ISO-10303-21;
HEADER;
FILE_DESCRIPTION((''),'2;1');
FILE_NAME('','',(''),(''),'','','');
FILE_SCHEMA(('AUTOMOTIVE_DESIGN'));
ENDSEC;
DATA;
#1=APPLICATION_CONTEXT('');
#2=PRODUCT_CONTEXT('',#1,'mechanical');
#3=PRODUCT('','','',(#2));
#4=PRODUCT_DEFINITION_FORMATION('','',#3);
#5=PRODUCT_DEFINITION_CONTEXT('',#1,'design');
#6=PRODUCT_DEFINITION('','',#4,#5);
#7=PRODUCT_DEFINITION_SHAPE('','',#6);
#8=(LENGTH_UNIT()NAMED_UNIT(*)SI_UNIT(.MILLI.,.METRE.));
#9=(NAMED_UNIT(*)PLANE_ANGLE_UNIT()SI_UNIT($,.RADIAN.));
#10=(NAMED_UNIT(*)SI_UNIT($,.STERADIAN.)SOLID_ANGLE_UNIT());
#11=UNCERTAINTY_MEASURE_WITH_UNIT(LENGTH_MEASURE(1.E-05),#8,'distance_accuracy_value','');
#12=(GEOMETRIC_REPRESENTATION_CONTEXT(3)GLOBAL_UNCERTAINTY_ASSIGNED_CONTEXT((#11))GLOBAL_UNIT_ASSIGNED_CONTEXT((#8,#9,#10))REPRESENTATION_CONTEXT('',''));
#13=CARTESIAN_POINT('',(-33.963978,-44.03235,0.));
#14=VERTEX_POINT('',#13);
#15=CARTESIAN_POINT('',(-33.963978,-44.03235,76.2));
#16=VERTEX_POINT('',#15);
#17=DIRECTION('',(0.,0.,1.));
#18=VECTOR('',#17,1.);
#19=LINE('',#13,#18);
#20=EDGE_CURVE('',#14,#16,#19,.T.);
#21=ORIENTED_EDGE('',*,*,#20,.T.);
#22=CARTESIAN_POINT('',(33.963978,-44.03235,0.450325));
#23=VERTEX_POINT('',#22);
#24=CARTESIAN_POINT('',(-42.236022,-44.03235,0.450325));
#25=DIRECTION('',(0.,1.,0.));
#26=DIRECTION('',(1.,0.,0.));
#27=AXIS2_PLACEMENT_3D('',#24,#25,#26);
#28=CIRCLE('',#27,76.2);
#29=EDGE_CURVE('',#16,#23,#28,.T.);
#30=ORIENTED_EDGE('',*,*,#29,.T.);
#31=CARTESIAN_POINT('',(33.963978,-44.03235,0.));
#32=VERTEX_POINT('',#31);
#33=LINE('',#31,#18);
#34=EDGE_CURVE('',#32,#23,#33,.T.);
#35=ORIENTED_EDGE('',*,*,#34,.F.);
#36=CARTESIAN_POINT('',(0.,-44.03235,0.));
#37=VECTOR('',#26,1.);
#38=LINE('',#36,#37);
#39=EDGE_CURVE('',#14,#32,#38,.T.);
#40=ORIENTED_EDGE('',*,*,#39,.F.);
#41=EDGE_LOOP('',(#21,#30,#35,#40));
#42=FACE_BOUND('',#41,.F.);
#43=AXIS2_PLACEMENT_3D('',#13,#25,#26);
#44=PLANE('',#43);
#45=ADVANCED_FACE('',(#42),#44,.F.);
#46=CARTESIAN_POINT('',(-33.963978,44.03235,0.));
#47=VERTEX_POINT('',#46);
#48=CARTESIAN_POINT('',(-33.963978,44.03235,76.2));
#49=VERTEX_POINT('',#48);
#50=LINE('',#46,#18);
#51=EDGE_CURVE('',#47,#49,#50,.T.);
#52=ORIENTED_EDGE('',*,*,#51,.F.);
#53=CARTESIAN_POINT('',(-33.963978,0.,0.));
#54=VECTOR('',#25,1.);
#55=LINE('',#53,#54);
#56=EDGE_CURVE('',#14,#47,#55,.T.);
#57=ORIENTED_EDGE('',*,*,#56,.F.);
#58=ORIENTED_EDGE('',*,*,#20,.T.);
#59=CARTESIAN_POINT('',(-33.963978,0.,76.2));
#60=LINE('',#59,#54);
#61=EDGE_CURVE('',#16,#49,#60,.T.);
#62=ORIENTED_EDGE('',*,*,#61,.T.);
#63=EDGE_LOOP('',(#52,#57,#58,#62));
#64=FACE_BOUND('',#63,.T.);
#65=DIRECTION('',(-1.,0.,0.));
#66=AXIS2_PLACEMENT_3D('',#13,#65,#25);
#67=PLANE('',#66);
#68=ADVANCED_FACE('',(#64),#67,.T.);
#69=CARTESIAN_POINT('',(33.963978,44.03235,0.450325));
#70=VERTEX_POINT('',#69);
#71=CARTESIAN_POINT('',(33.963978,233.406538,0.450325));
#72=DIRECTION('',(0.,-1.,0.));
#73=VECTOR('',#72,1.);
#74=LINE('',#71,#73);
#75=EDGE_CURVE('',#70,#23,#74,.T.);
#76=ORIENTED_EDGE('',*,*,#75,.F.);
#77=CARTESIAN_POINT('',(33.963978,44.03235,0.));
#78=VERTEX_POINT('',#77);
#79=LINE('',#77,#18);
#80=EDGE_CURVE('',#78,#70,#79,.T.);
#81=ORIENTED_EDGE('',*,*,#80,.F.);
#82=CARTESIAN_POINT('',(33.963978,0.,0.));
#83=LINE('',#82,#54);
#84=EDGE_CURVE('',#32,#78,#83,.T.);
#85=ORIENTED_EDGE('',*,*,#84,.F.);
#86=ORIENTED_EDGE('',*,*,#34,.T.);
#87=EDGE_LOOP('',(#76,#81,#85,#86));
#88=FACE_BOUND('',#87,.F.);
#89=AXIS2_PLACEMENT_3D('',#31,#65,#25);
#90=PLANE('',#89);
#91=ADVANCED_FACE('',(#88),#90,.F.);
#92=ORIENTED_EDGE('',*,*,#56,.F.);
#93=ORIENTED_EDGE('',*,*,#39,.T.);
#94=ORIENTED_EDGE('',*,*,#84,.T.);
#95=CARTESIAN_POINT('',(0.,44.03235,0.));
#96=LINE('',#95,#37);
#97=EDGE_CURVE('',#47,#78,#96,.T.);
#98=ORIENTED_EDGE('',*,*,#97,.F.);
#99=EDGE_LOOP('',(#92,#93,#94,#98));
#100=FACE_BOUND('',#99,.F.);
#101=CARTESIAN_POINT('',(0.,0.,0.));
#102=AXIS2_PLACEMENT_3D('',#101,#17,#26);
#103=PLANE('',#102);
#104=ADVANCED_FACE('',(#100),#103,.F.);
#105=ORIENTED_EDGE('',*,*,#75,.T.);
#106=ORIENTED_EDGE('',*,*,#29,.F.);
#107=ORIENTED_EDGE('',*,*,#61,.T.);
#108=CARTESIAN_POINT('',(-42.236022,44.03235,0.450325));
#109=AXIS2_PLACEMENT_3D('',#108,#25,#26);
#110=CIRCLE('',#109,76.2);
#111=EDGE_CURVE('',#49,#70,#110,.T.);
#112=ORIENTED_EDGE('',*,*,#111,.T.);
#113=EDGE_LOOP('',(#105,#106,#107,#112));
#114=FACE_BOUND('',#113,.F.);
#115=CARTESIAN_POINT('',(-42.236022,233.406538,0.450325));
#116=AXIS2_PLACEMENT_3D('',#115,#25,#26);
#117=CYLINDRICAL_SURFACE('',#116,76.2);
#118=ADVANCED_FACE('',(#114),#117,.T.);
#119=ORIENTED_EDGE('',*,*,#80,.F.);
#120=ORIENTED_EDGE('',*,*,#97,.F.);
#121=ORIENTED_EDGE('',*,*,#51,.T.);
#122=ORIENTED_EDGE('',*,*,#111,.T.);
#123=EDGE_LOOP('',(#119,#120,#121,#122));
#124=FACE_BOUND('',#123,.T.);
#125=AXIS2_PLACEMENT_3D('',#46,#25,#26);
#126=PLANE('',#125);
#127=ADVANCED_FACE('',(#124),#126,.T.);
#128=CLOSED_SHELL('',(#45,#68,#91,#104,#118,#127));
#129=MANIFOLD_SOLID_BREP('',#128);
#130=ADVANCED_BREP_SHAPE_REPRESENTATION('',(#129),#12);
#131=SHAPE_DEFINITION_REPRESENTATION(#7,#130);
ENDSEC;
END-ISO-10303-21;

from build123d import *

# Parameters (mm, degrees)
F0_W        = 67.9279565811
F0_H        = 88.0647003651
F1_DEPTH    = 76.2
F2_T1_DEPTH = 466.8130765225


# Not quite as in the source:
# - a fillet or chamfer that OpenCascade refuses, or shapes differently, is made with other operations: its cross-section is extruded or revolved along the edge and cut away or added


with BuildPart() as f1:
    # F0 (on Top) → F1 (new body)
    with BuildSketch(Plane.XY):
        Rectangle(F0_W, F0_H)
    extrude(amount=F1_DEPTH)

    # F2: fillet of radius 76.2 on 1 edges, made by hand

    # F2_s2 → F2_t1 (cut)
    with BuildSketch(Plane.XZ.offset(-233.4065382613)):
        with BuildLine():
            ThreePointArc((33.9639782906, 0.4503247685), (14.4947887401, 51.3232561342), (-33.9639782906, 76.2))
            Line((-33.9639782906, 76.2), (33.9639782906, 76.2))
            Line((33.9639782906, 76.2), (33.9639782906, 0.4503247685))
        make_face()
    extrude(amount=F2_T1_DEPTH, mode=Mode.SUBTRACT)


solid = f1.part
